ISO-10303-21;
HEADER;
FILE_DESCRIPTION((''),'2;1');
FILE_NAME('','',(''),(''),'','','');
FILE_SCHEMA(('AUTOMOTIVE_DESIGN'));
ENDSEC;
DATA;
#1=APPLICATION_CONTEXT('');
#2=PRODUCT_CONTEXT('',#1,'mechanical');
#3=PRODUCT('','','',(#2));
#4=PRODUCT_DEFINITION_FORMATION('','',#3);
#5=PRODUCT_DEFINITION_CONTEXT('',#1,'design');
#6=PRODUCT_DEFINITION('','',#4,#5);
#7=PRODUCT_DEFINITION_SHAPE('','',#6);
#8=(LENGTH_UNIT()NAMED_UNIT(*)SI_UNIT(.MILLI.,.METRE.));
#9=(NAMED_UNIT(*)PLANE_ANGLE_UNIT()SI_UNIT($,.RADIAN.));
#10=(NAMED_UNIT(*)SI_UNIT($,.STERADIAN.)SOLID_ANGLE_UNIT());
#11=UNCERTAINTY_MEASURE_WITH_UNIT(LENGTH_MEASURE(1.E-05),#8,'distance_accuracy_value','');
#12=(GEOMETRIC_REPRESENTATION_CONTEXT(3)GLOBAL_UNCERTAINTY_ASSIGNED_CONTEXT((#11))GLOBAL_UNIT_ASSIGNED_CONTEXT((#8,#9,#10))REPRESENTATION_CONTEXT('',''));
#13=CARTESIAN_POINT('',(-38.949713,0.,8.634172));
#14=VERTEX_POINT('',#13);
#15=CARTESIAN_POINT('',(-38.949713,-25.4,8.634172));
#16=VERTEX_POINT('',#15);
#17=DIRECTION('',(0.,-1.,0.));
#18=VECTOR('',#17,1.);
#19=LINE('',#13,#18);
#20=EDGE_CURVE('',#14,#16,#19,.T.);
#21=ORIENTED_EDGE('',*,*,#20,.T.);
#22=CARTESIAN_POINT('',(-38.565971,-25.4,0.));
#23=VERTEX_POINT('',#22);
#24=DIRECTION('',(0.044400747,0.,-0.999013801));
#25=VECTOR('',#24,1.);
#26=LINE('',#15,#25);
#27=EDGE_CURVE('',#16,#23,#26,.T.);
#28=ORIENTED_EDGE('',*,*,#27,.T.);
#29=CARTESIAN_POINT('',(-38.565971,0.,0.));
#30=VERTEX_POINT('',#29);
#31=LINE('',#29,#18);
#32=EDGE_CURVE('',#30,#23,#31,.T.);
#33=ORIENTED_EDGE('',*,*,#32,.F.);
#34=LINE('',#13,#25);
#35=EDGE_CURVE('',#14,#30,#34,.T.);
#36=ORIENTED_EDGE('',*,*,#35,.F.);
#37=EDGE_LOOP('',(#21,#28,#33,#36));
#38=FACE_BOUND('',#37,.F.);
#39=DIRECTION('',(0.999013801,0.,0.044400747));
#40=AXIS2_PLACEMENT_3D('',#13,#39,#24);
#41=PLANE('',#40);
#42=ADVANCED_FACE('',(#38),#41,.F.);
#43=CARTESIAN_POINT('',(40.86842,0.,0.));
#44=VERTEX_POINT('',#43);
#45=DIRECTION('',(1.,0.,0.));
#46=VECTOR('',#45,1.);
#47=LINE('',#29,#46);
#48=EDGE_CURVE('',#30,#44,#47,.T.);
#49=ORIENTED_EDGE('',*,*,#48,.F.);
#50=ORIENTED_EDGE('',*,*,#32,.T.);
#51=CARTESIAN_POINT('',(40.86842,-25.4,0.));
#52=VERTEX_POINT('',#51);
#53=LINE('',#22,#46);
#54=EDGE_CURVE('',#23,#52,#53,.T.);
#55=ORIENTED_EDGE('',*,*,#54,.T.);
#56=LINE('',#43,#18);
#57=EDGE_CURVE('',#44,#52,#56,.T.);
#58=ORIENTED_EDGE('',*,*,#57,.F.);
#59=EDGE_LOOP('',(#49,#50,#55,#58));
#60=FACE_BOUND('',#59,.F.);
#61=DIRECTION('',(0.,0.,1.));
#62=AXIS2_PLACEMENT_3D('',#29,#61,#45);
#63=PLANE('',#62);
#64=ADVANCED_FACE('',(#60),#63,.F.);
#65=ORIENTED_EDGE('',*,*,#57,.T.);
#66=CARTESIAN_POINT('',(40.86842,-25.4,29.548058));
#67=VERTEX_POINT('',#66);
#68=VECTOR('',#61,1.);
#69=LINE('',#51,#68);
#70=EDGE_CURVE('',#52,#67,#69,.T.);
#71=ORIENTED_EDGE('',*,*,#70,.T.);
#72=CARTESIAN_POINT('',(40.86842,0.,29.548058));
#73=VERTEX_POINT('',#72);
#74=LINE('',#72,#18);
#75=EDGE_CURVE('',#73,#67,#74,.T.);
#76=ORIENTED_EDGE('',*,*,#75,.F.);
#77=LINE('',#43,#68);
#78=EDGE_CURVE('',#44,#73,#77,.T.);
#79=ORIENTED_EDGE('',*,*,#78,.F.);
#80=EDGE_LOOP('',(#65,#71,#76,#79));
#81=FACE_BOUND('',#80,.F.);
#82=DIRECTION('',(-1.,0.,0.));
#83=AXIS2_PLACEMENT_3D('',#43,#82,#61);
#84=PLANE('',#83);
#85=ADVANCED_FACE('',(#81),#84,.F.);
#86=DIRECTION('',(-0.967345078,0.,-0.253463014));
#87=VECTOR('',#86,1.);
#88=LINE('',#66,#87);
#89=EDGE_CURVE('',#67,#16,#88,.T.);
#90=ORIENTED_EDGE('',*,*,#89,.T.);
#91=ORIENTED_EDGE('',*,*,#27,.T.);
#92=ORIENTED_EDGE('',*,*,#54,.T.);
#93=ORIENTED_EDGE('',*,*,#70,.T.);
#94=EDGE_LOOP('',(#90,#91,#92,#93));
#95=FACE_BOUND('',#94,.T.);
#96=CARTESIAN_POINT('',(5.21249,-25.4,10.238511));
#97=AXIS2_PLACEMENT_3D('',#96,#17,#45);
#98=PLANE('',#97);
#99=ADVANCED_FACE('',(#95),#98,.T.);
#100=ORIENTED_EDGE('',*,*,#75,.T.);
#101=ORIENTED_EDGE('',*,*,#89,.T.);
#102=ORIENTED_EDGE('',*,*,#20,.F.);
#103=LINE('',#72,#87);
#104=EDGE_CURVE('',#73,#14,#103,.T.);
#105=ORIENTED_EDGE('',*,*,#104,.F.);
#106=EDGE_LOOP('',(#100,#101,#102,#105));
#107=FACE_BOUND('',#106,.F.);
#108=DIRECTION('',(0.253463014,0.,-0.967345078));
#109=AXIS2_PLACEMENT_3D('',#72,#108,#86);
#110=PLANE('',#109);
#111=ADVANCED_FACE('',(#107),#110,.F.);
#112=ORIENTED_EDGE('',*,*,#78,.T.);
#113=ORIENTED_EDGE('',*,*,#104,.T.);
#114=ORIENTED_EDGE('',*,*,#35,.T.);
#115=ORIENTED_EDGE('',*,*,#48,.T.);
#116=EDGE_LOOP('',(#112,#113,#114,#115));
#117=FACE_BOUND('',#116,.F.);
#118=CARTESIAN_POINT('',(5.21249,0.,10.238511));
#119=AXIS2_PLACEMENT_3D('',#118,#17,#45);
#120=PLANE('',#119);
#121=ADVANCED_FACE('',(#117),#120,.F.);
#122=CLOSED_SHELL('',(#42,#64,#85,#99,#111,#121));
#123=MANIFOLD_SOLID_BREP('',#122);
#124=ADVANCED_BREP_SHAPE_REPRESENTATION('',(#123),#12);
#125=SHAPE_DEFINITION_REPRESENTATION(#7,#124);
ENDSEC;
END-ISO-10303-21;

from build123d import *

# Parameters (mm, degrees)
F1_DEPTH = 25.4


# Not quite as in the source:
# - the program builds the solid bodies; features that only make, move or delete a surface that nothing else refers to are left out


with BuildPart() as f1:
    # F0 (on Front) → F1 (new body)
    with BuildSketch(Plane.XZ):
        Polygon((-38.9497131109, 8.63417238), (-38.5659709573, 0), (40.8684201539, 0), (40.8684201539, 29.5480582863), align=None)
    extrude(amount=F1_DEPTH)


solid = f1.part
